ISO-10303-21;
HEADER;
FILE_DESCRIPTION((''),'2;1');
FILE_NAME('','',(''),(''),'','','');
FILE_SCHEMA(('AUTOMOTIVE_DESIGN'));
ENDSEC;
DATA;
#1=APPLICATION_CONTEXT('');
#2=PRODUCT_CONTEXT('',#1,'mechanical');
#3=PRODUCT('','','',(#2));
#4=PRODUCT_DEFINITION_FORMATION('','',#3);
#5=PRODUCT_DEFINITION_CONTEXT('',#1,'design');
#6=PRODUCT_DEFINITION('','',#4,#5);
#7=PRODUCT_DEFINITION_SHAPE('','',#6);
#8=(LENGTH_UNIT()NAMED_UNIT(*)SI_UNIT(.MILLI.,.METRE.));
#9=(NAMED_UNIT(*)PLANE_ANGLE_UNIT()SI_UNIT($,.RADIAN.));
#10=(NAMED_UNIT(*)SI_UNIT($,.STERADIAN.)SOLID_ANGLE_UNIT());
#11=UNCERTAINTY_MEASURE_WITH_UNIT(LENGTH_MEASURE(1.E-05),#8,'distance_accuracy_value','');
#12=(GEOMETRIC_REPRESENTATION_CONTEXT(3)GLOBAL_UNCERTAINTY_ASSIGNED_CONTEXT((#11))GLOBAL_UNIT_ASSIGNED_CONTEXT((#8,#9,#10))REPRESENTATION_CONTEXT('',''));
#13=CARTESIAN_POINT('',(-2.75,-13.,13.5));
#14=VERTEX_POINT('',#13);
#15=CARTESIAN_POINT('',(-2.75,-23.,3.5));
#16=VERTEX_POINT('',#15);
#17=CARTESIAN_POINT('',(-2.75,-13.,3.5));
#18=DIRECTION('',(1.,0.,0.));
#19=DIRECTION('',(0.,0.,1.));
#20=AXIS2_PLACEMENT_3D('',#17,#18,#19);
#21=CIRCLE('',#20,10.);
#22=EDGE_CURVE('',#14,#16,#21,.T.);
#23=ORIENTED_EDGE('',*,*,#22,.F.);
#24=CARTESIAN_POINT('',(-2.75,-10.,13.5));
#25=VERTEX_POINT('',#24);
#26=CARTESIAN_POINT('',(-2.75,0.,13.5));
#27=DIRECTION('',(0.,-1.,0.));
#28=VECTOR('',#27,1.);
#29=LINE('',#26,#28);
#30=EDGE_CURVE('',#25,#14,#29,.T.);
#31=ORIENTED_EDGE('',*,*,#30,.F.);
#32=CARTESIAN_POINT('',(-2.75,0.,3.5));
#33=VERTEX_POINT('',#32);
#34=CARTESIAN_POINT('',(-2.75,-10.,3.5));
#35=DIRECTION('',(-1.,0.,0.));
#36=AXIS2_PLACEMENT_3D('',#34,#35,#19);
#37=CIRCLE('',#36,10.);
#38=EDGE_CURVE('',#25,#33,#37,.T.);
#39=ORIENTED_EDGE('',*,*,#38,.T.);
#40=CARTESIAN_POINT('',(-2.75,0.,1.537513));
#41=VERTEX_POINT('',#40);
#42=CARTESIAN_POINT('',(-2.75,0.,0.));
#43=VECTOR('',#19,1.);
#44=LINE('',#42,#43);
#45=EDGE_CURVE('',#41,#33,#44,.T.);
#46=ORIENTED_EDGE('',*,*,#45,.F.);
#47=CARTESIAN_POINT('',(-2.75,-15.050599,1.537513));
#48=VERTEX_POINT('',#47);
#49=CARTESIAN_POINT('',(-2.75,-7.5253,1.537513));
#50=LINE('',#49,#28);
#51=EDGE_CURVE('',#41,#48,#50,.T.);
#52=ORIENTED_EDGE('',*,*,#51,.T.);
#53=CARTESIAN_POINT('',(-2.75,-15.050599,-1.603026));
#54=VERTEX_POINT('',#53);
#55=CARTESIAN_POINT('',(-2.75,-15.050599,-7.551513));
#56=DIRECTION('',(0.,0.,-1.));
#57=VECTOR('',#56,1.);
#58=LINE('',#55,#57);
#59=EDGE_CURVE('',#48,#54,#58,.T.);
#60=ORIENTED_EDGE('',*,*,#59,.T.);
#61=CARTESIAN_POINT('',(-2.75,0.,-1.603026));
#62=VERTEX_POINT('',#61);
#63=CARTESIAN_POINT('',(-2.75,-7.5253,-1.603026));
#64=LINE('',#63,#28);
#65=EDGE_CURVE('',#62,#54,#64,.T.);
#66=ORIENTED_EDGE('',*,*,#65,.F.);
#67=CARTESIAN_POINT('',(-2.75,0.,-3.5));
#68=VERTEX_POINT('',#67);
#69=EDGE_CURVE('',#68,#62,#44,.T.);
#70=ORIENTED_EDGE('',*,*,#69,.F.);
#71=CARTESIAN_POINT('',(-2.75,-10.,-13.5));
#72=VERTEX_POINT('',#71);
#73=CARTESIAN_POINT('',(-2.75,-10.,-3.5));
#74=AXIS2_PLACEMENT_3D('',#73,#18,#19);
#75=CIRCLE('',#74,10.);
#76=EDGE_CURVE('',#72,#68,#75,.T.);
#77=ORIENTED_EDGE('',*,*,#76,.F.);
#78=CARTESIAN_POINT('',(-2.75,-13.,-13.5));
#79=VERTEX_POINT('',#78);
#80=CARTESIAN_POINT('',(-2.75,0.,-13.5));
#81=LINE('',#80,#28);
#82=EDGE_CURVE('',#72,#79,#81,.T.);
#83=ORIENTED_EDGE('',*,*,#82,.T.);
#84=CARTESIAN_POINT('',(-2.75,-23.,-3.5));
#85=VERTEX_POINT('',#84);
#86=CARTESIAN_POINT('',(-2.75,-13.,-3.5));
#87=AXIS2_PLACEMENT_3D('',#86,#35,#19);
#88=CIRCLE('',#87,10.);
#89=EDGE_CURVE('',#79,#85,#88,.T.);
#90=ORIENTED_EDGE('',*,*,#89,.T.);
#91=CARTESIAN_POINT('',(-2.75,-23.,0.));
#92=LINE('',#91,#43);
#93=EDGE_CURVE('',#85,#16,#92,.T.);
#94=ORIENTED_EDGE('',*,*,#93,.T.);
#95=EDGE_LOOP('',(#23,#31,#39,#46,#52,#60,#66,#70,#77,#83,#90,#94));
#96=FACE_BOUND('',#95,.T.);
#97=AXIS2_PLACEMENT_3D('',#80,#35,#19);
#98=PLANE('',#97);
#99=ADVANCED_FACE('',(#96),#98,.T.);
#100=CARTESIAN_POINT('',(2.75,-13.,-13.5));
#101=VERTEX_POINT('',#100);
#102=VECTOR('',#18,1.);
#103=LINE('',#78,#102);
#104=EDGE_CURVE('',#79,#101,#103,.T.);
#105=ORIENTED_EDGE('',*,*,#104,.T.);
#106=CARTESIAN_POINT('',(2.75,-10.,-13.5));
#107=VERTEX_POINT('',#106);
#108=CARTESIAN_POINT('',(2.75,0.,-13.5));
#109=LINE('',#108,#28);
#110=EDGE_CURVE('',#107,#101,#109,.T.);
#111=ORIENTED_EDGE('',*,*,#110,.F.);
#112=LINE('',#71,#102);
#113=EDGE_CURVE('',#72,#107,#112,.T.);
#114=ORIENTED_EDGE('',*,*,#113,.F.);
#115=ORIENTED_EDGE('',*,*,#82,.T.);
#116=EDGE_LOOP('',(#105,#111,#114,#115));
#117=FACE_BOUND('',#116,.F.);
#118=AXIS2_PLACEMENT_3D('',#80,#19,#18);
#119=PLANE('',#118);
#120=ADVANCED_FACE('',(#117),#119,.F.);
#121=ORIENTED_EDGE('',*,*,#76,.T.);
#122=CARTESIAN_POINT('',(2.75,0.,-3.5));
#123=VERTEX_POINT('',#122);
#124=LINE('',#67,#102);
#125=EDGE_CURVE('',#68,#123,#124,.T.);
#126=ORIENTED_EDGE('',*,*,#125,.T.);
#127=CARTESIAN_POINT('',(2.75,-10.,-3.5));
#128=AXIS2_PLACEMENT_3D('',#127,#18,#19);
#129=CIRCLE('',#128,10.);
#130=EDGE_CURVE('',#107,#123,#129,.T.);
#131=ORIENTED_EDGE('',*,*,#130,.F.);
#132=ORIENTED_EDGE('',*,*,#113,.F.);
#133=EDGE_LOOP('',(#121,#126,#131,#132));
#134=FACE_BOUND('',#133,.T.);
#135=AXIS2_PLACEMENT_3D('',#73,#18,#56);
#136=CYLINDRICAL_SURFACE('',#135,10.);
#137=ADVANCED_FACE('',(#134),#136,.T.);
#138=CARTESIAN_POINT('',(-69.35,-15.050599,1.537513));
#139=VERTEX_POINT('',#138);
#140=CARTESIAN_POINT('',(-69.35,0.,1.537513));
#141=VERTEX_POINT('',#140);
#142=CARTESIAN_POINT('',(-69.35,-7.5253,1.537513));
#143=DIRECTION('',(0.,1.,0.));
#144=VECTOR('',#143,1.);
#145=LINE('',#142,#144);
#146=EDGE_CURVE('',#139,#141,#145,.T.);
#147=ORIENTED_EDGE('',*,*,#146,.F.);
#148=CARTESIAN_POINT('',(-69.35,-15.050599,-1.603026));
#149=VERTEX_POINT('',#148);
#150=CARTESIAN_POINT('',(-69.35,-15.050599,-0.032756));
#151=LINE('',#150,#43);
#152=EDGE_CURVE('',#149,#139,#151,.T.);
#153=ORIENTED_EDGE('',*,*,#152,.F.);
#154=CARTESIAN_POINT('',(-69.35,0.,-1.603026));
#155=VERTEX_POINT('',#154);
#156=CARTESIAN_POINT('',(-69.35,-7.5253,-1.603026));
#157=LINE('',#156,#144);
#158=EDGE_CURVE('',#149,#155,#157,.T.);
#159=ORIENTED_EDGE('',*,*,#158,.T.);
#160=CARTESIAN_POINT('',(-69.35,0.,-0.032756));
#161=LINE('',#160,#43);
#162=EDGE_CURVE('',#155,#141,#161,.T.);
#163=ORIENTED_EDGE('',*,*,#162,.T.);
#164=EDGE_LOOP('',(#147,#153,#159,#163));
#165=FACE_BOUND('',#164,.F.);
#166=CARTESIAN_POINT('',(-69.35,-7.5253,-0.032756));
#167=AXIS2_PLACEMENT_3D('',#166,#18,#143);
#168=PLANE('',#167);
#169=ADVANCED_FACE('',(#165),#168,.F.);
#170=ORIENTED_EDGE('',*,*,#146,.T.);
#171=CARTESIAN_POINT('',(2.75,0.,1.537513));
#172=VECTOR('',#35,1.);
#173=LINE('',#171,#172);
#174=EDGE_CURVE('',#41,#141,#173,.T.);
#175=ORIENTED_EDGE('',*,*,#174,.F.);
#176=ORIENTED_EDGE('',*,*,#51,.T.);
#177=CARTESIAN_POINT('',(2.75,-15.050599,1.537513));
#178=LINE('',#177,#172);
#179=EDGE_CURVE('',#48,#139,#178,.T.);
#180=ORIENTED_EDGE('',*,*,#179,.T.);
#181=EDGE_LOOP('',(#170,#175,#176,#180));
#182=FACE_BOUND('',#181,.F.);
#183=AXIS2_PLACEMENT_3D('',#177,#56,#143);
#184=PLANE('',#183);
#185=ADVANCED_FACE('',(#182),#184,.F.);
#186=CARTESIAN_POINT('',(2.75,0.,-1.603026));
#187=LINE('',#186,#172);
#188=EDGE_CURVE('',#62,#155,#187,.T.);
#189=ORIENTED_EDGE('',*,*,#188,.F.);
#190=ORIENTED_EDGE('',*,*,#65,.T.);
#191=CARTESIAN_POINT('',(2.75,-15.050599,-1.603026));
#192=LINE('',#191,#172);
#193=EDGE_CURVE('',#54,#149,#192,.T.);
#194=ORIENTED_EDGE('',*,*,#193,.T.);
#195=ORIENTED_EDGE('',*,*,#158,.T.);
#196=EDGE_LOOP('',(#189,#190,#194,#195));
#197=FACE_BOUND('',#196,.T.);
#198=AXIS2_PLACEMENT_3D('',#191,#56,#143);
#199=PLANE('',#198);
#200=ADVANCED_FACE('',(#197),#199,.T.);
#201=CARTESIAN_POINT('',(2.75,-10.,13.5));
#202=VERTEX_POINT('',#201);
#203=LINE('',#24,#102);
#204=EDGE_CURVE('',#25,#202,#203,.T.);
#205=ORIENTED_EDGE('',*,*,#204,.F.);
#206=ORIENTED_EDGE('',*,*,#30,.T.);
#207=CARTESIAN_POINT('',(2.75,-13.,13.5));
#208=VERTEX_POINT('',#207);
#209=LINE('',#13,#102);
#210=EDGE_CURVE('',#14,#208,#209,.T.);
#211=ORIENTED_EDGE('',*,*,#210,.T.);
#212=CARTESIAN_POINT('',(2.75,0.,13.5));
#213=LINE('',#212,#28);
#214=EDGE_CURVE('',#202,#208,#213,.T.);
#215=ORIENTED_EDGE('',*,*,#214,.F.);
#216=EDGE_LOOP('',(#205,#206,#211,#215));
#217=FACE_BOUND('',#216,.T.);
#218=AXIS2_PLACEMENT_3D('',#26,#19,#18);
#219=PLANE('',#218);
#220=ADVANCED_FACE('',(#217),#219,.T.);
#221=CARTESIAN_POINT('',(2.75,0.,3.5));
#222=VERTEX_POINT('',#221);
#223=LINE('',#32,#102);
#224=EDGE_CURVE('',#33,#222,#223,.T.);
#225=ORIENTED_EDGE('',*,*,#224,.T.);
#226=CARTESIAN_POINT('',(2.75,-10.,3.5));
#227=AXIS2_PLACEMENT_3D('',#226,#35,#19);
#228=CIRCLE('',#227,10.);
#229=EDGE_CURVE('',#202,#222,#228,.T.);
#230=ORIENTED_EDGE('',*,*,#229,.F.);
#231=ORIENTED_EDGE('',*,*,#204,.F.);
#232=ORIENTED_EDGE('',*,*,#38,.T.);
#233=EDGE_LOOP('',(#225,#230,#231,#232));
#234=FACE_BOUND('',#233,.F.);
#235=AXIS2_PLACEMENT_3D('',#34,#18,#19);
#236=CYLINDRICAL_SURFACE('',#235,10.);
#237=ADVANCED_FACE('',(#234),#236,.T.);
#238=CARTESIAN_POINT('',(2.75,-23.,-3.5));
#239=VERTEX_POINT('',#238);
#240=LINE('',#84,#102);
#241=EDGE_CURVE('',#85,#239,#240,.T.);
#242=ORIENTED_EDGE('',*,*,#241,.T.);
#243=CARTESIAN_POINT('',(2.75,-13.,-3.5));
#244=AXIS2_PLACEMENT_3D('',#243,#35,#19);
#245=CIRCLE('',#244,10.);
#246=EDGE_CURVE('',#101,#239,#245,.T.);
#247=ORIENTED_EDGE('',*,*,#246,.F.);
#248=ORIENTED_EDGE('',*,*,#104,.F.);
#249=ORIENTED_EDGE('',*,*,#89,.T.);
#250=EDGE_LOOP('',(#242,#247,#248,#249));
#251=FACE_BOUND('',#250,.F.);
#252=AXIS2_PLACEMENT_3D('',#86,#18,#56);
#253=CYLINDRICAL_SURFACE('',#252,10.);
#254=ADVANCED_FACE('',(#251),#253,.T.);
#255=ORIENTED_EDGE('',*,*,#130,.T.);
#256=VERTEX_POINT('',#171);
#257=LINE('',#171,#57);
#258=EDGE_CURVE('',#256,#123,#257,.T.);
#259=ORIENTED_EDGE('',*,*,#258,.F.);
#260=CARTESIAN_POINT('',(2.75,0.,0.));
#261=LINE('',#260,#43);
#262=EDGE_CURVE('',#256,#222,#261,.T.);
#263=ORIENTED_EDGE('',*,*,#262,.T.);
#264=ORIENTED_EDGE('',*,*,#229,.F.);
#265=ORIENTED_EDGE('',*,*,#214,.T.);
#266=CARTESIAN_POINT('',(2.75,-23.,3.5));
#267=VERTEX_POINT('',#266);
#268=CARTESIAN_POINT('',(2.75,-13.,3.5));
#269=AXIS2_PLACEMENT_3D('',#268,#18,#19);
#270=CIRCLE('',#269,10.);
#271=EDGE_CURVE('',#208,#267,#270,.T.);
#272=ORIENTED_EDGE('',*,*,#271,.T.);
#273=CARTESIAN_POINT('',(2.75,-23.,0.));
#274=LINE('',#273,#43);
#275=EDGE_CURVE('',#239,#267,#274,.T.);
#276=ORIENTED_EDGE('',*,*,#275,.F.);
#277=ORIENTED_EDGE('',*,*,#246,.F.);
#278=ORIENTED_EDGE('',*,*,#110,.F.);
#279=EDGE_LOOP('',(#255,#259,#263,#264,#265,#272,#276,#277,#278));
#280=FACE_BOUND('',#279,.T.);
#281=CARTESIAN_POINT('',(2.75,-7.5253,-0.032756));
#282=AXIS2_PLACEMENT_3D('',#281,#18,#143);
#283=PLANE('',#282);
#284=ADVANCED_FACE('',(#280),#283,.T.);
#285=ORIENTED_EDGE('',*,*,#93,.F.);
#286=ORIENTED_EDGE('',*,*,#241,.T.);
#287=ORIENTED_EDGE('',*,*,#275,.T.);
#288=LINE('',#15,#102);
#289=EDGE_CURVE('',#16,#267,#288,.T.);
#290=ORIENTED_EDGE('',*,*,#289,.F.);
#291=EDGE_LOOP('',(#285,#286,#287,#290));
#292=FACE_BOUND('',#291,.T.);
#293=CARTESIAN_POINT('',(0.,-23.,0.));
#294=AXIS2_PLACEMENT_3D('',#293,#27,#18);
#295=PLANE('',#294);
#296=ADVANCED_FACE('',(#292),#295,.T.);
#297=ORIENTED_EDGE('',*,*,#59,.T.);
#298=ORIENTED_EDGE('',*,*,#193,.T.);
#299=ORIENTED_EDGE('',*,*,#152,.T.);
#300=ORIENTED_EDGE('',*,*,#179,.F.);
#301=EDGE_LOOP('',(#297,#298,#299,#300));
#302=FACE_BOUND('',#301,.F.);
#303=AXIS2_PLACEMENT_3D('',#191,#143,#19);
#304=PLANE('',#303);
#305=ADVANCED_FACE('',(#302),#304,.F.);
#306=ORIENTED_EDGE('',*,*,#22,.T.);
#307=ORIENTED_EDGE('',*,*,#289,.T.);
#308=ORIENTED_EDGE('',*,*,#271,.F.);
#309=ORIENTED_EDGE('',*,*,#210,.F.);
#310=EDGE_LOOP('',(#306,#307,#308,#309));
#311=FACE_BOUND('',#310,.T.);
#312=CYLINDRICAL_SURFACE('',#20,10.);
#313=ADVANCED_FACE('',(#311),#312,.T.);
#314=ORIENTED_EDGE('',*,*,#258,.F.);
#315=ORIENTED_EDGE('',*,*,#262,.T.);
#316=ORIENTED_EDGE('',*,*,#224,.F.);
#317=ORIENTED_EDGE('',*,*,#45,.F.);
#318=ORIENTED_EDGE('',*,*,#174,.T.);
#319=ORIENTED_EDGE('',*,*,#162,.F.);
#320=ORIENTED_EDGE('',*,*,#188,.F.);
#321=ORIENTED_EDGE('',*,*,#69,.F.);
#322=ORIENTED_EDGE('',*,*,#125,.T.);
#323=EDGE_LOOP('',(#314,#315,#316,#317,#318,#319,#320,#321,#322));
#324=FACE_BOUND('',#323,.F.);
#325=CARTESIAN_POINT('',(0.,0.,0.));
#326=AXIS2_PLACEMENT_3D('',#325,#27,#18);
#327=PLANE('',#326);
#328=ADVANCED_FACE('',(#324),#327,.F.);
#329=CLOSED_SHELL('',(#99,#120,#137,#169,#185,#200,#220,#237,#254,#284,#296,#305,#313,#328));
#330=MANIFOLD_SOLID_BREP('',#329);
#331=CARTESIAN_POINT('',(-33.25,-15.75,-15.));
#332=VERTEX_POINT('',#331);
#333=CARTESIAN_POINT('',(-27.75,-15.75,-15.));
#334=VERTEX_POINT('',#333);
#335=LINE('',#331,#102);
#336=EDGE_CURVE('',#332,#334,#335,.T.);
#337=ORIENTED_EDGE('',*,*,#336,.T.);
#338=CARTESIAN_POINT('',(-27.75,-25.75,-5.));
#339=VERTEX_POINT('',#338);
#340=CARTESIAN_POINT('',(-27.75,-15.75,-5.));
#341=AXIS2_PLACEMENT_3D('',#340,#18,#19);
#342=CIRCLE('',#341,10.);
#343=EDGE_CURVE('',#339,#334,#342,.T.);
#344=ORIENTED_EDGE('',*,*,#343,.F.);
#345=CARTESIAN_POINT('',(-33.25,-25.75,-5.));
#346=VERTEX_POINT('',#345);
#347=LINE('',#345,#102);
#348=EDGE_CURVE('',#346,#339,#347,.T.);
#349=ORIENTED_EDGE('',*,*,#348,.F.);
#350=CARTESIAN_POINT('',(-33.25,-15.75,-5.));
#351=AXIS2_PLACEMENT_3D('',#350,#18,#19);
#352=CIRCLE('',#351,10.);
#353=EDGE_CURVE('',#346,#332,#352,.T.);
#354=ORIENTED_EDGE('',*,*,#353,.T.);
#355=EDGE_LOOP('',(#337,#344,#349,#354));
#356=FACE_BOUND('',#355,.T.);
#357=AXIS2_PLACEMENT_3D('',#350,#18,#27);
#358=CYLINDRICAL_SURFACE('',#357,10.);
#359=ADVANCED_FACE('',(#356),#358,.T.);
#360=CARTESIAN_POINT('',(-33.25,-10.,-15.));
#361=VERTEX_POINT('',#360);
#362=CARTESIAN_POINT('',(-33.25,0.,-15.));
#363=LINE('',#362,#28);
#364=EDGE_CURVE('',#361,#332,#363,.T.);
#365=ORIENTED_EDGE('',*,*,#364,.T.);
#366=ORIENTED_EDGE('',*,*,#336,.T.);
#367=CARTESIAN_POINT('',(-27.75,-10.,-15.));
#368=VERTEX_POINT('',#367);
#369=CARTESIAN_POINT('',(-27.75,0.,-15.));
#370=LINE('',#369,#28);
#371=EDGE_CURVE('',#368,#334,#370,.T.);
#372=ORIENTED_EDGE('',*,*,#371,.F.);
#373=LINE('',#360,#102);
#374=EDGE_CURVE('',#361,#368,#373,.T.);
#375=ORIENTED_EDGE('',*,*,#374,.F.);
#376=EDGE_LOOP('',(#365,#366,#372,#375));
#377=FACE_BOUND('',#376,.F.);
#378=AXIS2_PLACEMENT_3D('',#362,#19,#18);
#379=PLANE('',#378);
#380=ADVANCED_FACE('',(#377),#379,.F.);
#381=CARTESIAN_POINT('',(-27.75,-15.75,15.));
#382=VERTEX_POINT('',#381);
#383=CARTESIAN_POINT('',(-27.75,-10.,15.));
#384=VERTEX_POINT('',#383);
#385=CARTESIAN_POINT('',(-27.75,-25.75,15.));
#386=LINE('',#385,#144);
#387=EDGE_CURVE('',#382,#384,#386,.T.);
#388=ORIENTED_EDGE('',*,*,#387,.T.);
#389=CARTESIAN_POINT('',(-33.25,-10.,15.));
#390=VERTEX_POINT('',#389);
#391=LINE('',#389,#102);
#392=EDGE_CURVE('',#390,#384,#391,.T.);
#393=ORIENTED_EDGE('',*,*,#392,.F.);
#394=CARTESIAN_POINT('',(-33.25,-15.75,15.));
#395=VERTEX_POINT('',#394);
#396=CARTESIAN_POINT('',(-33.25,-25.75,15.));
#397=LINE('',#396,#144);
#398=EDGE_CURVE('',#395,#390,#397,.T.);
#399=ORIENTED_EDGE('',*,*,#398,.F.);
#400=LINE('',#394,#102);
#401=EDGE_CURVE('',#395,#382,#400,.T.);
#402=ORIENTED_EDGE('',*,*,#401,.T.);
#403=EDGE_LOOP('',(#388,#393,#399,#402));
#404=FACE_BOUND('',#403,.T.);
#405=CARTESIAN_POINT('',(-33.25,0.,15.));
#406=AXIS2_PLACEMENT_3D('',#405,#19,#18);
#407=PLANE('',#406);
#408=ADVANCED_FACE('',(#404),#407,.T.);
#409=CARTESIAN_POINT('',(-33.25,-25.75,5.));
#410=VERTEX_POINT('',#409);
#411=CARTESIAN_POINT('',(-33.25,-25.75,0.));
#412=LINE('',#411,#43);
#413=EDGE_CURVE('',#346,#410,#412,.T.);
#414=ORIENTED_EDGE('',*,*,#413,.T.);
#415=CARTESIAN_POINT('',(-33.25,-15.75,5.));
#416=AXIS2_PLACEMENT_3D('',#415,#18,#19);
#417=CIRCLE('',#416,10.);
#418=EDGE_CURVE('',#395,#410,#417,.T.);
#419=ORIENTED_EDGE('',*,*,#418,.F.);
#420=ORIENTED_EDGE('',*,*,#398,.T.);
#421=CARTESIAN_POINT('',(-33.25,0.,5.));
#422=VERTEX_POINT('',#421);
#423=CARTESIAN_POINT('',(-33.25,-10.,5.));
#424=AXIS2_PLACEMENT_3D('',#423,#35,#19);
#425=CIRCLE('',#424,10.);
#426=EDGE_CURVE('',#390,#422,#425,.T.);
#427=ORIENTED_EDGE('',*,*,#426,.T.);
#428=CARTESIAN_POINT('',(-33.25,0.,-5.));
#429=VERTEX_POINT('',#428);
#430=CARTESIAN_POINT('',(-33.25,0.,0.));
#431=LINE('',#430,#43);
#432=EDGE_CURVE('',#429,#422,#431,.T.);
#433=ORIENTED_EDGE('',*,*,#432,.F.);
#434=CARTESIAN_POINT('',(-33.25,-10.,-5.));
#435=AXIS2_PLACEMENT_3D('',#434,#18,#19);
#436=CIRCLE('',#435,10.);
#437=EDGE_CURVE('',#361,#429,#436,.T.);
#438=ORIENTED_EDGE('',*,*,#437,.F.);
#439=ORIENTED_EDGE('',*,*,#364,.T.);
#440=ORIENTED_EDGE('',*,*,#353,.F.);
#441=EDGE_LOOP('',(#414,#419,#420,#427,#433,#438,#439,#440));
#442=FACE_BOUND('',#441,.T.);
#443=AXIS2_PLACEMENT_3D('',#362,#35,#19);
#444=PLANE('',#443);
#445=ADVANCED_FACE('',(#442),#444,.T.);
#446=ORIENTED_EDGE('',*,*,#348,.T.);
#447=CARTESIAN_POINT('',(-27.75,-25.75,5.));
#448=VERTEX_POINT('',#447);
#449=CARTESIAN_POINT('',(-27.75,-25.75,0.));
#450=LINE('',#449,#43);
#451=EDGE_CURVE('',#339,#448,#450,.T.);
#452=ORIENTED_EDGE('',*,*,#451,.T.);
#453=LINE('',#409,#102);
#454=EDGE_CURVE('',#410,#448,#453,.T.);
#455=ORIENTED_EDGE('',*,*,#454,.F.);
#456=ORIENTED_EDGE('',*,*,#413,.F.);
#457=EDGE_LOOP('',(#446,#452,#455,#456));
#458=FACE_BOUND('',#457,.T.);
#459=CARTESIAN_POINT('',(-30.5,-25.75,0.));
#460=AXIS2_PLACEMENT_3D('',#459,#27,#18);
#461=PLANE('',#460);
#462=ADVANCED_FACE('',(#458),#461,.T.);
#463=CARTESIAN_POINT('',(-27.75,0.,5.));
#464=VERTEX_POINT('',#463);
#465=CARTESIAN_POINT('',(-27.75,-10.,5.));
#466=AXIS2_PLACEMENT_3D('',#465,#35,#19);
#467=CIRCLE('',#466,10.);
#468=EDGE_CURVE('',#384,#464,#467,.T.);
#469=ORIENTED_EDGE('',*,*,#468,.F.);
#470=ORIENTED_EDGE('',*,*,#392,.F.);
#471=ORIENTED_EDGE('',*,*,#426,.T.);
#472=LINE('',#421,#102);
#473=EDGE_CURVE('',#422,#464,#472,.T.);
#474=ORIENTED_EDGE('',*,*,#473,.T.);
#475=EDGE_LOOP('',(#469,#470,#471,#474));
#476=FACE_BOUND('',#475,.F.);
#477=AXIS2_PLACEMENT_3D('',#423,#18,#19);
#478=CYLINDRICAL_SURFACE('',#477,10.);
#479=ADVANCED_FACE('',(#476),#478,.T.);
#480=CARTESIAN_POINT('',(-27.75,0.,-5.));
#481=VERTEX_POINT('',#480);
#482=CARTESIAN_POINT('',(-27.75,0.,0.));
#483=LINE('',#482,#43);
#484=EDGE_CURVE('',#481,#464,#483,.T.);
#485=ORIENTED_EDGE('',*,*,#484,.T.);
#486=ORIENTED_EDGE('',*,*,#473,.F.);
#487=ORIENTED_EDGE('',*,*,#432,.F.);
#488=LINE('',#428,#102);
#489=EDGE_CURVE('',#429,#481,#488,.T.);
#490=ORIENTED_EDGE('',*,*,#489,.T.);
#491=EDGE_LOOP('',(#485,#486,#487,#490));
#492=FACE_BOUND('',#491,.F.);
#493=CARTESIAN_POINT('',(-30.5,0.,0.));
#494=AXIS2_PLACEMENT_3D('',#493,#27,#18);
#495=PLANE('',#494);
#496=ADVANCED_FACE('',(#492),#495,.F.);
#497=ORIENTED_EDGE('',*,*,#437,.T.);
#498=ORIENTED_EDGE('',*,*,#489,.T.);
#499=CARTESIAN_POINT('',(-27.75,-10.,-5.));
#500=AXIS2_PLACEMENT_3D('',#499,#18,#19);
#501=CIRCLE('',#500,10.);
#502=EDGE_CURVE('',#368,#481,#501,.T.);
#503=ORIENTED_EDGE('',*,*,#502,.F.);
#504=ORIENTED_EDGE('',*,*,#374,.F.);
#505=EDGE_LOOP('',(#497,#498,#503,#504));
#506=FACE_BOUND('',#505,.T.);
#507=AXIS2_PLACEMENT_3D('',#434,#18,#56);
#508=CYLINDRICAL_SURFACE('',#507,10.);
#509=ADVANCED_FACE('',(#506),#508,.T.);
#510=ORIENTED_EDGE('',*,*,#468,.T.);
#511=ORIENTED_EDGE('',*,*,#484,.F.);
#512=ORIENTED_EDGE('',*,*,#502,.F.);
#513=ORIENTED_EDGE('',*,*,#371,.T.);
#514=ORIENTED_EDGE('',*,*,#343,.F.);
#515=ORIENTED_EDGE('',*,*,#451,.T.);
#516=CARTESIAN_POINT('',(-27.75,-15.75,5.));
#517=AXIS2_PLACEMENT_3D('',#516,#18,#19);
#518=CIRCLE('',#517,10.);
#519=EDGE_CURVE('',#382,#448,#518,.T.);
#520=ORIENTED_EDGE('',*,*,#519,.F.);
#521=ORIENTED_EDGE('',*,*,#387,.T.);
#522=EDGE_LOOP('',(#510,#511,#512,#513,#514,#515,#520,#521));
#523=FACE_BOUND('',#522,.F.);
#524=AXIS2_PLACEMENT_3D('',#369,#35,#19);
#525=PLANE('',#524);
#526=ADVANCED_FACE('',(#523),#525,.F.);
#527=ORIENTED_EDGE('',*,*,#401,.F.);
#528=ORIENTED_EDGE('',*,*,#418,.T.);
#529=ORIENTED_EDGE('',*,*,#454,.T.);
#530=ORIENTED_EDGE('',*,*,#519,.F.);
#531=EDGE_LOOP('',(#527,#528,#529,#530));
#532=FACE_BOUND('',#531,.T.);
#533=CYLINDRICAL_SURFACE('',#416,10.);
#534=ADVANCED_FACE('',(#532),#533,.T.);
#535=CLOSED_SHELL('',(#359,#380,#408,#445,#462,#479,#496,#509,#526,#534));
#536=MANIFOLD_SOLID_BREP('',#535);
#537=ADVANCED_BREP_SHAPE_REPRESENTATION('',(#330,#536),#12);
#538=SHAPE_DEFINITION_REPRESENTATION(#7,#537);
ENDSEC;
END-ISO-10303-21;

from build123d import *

# Parameters (mm, degrees)
F0_W     = 5.5
F0_H     = 27
F1_DEPTH = 23
F0_H_2   = 30
F2_DEPTH = 2.75
F3_R     = 10
F4_R     = 10
F5_W     = 15.0505993515
F5_H     = 3.1405385816
F6_DEPTH = 72.1


with BuildPart() as f1:
    # F0 (on Front) → F1 (new body)
    with BuildSketch(Plane.XZ):
        Rectangle(F0_W, F0_H)
    extrude(amount=F1_DEPTH)

    # F3
    f3_edges = [f1.edges().sort_by_distance(p)[0] for p in [
        (0, -23, -13.5),
        (0, -23, 13.5),
        (0, 0, -13.5),
        (0, 0, 13.5),
    ]]
    fillet(f3_edges, radius=F3_R)

    # F5 (on face) → F6 (join)
    with BuildSketch(Plane.YZ.offset(2.75)):
        with Locations((-7.5252996758, -0.032756303)):
            Rectangle(F5_W, F5_H)
    extrude(amount=-F6_DEPTH)


with BuildPart() as f1b:
    # F0 (on Front) → F1, piece 2 (new body)
    with BuildSketch(Plane.XZ):
        with Locations((-30.5, 0)):
            Rectangle(F0_W, F0_H_2)
    extrude(amount=F1_DEPTH)

    # F2 (add, symmetric): a face of the model
    f2_faces = [f1b.faces().sort_by_distance(p)[0] for p in [
        (-30.5, -23, 0),
    ]]
    extrude(f2_faces, amount=F2_DEPTH, both=True)

    # F4
    f4_edges = [f1b.edges().sort_by_distance(p)[0] for p in [
        (-30.5, 0, 15),
        (-30.5, 0, -15),
        (-30.5, -25.75, -15),
        (-30.5, -25.75, 15),
    ]]
    fillet(f4_edges, radius=F4_R)


solid = Compound([f1.part, f1b.part])
